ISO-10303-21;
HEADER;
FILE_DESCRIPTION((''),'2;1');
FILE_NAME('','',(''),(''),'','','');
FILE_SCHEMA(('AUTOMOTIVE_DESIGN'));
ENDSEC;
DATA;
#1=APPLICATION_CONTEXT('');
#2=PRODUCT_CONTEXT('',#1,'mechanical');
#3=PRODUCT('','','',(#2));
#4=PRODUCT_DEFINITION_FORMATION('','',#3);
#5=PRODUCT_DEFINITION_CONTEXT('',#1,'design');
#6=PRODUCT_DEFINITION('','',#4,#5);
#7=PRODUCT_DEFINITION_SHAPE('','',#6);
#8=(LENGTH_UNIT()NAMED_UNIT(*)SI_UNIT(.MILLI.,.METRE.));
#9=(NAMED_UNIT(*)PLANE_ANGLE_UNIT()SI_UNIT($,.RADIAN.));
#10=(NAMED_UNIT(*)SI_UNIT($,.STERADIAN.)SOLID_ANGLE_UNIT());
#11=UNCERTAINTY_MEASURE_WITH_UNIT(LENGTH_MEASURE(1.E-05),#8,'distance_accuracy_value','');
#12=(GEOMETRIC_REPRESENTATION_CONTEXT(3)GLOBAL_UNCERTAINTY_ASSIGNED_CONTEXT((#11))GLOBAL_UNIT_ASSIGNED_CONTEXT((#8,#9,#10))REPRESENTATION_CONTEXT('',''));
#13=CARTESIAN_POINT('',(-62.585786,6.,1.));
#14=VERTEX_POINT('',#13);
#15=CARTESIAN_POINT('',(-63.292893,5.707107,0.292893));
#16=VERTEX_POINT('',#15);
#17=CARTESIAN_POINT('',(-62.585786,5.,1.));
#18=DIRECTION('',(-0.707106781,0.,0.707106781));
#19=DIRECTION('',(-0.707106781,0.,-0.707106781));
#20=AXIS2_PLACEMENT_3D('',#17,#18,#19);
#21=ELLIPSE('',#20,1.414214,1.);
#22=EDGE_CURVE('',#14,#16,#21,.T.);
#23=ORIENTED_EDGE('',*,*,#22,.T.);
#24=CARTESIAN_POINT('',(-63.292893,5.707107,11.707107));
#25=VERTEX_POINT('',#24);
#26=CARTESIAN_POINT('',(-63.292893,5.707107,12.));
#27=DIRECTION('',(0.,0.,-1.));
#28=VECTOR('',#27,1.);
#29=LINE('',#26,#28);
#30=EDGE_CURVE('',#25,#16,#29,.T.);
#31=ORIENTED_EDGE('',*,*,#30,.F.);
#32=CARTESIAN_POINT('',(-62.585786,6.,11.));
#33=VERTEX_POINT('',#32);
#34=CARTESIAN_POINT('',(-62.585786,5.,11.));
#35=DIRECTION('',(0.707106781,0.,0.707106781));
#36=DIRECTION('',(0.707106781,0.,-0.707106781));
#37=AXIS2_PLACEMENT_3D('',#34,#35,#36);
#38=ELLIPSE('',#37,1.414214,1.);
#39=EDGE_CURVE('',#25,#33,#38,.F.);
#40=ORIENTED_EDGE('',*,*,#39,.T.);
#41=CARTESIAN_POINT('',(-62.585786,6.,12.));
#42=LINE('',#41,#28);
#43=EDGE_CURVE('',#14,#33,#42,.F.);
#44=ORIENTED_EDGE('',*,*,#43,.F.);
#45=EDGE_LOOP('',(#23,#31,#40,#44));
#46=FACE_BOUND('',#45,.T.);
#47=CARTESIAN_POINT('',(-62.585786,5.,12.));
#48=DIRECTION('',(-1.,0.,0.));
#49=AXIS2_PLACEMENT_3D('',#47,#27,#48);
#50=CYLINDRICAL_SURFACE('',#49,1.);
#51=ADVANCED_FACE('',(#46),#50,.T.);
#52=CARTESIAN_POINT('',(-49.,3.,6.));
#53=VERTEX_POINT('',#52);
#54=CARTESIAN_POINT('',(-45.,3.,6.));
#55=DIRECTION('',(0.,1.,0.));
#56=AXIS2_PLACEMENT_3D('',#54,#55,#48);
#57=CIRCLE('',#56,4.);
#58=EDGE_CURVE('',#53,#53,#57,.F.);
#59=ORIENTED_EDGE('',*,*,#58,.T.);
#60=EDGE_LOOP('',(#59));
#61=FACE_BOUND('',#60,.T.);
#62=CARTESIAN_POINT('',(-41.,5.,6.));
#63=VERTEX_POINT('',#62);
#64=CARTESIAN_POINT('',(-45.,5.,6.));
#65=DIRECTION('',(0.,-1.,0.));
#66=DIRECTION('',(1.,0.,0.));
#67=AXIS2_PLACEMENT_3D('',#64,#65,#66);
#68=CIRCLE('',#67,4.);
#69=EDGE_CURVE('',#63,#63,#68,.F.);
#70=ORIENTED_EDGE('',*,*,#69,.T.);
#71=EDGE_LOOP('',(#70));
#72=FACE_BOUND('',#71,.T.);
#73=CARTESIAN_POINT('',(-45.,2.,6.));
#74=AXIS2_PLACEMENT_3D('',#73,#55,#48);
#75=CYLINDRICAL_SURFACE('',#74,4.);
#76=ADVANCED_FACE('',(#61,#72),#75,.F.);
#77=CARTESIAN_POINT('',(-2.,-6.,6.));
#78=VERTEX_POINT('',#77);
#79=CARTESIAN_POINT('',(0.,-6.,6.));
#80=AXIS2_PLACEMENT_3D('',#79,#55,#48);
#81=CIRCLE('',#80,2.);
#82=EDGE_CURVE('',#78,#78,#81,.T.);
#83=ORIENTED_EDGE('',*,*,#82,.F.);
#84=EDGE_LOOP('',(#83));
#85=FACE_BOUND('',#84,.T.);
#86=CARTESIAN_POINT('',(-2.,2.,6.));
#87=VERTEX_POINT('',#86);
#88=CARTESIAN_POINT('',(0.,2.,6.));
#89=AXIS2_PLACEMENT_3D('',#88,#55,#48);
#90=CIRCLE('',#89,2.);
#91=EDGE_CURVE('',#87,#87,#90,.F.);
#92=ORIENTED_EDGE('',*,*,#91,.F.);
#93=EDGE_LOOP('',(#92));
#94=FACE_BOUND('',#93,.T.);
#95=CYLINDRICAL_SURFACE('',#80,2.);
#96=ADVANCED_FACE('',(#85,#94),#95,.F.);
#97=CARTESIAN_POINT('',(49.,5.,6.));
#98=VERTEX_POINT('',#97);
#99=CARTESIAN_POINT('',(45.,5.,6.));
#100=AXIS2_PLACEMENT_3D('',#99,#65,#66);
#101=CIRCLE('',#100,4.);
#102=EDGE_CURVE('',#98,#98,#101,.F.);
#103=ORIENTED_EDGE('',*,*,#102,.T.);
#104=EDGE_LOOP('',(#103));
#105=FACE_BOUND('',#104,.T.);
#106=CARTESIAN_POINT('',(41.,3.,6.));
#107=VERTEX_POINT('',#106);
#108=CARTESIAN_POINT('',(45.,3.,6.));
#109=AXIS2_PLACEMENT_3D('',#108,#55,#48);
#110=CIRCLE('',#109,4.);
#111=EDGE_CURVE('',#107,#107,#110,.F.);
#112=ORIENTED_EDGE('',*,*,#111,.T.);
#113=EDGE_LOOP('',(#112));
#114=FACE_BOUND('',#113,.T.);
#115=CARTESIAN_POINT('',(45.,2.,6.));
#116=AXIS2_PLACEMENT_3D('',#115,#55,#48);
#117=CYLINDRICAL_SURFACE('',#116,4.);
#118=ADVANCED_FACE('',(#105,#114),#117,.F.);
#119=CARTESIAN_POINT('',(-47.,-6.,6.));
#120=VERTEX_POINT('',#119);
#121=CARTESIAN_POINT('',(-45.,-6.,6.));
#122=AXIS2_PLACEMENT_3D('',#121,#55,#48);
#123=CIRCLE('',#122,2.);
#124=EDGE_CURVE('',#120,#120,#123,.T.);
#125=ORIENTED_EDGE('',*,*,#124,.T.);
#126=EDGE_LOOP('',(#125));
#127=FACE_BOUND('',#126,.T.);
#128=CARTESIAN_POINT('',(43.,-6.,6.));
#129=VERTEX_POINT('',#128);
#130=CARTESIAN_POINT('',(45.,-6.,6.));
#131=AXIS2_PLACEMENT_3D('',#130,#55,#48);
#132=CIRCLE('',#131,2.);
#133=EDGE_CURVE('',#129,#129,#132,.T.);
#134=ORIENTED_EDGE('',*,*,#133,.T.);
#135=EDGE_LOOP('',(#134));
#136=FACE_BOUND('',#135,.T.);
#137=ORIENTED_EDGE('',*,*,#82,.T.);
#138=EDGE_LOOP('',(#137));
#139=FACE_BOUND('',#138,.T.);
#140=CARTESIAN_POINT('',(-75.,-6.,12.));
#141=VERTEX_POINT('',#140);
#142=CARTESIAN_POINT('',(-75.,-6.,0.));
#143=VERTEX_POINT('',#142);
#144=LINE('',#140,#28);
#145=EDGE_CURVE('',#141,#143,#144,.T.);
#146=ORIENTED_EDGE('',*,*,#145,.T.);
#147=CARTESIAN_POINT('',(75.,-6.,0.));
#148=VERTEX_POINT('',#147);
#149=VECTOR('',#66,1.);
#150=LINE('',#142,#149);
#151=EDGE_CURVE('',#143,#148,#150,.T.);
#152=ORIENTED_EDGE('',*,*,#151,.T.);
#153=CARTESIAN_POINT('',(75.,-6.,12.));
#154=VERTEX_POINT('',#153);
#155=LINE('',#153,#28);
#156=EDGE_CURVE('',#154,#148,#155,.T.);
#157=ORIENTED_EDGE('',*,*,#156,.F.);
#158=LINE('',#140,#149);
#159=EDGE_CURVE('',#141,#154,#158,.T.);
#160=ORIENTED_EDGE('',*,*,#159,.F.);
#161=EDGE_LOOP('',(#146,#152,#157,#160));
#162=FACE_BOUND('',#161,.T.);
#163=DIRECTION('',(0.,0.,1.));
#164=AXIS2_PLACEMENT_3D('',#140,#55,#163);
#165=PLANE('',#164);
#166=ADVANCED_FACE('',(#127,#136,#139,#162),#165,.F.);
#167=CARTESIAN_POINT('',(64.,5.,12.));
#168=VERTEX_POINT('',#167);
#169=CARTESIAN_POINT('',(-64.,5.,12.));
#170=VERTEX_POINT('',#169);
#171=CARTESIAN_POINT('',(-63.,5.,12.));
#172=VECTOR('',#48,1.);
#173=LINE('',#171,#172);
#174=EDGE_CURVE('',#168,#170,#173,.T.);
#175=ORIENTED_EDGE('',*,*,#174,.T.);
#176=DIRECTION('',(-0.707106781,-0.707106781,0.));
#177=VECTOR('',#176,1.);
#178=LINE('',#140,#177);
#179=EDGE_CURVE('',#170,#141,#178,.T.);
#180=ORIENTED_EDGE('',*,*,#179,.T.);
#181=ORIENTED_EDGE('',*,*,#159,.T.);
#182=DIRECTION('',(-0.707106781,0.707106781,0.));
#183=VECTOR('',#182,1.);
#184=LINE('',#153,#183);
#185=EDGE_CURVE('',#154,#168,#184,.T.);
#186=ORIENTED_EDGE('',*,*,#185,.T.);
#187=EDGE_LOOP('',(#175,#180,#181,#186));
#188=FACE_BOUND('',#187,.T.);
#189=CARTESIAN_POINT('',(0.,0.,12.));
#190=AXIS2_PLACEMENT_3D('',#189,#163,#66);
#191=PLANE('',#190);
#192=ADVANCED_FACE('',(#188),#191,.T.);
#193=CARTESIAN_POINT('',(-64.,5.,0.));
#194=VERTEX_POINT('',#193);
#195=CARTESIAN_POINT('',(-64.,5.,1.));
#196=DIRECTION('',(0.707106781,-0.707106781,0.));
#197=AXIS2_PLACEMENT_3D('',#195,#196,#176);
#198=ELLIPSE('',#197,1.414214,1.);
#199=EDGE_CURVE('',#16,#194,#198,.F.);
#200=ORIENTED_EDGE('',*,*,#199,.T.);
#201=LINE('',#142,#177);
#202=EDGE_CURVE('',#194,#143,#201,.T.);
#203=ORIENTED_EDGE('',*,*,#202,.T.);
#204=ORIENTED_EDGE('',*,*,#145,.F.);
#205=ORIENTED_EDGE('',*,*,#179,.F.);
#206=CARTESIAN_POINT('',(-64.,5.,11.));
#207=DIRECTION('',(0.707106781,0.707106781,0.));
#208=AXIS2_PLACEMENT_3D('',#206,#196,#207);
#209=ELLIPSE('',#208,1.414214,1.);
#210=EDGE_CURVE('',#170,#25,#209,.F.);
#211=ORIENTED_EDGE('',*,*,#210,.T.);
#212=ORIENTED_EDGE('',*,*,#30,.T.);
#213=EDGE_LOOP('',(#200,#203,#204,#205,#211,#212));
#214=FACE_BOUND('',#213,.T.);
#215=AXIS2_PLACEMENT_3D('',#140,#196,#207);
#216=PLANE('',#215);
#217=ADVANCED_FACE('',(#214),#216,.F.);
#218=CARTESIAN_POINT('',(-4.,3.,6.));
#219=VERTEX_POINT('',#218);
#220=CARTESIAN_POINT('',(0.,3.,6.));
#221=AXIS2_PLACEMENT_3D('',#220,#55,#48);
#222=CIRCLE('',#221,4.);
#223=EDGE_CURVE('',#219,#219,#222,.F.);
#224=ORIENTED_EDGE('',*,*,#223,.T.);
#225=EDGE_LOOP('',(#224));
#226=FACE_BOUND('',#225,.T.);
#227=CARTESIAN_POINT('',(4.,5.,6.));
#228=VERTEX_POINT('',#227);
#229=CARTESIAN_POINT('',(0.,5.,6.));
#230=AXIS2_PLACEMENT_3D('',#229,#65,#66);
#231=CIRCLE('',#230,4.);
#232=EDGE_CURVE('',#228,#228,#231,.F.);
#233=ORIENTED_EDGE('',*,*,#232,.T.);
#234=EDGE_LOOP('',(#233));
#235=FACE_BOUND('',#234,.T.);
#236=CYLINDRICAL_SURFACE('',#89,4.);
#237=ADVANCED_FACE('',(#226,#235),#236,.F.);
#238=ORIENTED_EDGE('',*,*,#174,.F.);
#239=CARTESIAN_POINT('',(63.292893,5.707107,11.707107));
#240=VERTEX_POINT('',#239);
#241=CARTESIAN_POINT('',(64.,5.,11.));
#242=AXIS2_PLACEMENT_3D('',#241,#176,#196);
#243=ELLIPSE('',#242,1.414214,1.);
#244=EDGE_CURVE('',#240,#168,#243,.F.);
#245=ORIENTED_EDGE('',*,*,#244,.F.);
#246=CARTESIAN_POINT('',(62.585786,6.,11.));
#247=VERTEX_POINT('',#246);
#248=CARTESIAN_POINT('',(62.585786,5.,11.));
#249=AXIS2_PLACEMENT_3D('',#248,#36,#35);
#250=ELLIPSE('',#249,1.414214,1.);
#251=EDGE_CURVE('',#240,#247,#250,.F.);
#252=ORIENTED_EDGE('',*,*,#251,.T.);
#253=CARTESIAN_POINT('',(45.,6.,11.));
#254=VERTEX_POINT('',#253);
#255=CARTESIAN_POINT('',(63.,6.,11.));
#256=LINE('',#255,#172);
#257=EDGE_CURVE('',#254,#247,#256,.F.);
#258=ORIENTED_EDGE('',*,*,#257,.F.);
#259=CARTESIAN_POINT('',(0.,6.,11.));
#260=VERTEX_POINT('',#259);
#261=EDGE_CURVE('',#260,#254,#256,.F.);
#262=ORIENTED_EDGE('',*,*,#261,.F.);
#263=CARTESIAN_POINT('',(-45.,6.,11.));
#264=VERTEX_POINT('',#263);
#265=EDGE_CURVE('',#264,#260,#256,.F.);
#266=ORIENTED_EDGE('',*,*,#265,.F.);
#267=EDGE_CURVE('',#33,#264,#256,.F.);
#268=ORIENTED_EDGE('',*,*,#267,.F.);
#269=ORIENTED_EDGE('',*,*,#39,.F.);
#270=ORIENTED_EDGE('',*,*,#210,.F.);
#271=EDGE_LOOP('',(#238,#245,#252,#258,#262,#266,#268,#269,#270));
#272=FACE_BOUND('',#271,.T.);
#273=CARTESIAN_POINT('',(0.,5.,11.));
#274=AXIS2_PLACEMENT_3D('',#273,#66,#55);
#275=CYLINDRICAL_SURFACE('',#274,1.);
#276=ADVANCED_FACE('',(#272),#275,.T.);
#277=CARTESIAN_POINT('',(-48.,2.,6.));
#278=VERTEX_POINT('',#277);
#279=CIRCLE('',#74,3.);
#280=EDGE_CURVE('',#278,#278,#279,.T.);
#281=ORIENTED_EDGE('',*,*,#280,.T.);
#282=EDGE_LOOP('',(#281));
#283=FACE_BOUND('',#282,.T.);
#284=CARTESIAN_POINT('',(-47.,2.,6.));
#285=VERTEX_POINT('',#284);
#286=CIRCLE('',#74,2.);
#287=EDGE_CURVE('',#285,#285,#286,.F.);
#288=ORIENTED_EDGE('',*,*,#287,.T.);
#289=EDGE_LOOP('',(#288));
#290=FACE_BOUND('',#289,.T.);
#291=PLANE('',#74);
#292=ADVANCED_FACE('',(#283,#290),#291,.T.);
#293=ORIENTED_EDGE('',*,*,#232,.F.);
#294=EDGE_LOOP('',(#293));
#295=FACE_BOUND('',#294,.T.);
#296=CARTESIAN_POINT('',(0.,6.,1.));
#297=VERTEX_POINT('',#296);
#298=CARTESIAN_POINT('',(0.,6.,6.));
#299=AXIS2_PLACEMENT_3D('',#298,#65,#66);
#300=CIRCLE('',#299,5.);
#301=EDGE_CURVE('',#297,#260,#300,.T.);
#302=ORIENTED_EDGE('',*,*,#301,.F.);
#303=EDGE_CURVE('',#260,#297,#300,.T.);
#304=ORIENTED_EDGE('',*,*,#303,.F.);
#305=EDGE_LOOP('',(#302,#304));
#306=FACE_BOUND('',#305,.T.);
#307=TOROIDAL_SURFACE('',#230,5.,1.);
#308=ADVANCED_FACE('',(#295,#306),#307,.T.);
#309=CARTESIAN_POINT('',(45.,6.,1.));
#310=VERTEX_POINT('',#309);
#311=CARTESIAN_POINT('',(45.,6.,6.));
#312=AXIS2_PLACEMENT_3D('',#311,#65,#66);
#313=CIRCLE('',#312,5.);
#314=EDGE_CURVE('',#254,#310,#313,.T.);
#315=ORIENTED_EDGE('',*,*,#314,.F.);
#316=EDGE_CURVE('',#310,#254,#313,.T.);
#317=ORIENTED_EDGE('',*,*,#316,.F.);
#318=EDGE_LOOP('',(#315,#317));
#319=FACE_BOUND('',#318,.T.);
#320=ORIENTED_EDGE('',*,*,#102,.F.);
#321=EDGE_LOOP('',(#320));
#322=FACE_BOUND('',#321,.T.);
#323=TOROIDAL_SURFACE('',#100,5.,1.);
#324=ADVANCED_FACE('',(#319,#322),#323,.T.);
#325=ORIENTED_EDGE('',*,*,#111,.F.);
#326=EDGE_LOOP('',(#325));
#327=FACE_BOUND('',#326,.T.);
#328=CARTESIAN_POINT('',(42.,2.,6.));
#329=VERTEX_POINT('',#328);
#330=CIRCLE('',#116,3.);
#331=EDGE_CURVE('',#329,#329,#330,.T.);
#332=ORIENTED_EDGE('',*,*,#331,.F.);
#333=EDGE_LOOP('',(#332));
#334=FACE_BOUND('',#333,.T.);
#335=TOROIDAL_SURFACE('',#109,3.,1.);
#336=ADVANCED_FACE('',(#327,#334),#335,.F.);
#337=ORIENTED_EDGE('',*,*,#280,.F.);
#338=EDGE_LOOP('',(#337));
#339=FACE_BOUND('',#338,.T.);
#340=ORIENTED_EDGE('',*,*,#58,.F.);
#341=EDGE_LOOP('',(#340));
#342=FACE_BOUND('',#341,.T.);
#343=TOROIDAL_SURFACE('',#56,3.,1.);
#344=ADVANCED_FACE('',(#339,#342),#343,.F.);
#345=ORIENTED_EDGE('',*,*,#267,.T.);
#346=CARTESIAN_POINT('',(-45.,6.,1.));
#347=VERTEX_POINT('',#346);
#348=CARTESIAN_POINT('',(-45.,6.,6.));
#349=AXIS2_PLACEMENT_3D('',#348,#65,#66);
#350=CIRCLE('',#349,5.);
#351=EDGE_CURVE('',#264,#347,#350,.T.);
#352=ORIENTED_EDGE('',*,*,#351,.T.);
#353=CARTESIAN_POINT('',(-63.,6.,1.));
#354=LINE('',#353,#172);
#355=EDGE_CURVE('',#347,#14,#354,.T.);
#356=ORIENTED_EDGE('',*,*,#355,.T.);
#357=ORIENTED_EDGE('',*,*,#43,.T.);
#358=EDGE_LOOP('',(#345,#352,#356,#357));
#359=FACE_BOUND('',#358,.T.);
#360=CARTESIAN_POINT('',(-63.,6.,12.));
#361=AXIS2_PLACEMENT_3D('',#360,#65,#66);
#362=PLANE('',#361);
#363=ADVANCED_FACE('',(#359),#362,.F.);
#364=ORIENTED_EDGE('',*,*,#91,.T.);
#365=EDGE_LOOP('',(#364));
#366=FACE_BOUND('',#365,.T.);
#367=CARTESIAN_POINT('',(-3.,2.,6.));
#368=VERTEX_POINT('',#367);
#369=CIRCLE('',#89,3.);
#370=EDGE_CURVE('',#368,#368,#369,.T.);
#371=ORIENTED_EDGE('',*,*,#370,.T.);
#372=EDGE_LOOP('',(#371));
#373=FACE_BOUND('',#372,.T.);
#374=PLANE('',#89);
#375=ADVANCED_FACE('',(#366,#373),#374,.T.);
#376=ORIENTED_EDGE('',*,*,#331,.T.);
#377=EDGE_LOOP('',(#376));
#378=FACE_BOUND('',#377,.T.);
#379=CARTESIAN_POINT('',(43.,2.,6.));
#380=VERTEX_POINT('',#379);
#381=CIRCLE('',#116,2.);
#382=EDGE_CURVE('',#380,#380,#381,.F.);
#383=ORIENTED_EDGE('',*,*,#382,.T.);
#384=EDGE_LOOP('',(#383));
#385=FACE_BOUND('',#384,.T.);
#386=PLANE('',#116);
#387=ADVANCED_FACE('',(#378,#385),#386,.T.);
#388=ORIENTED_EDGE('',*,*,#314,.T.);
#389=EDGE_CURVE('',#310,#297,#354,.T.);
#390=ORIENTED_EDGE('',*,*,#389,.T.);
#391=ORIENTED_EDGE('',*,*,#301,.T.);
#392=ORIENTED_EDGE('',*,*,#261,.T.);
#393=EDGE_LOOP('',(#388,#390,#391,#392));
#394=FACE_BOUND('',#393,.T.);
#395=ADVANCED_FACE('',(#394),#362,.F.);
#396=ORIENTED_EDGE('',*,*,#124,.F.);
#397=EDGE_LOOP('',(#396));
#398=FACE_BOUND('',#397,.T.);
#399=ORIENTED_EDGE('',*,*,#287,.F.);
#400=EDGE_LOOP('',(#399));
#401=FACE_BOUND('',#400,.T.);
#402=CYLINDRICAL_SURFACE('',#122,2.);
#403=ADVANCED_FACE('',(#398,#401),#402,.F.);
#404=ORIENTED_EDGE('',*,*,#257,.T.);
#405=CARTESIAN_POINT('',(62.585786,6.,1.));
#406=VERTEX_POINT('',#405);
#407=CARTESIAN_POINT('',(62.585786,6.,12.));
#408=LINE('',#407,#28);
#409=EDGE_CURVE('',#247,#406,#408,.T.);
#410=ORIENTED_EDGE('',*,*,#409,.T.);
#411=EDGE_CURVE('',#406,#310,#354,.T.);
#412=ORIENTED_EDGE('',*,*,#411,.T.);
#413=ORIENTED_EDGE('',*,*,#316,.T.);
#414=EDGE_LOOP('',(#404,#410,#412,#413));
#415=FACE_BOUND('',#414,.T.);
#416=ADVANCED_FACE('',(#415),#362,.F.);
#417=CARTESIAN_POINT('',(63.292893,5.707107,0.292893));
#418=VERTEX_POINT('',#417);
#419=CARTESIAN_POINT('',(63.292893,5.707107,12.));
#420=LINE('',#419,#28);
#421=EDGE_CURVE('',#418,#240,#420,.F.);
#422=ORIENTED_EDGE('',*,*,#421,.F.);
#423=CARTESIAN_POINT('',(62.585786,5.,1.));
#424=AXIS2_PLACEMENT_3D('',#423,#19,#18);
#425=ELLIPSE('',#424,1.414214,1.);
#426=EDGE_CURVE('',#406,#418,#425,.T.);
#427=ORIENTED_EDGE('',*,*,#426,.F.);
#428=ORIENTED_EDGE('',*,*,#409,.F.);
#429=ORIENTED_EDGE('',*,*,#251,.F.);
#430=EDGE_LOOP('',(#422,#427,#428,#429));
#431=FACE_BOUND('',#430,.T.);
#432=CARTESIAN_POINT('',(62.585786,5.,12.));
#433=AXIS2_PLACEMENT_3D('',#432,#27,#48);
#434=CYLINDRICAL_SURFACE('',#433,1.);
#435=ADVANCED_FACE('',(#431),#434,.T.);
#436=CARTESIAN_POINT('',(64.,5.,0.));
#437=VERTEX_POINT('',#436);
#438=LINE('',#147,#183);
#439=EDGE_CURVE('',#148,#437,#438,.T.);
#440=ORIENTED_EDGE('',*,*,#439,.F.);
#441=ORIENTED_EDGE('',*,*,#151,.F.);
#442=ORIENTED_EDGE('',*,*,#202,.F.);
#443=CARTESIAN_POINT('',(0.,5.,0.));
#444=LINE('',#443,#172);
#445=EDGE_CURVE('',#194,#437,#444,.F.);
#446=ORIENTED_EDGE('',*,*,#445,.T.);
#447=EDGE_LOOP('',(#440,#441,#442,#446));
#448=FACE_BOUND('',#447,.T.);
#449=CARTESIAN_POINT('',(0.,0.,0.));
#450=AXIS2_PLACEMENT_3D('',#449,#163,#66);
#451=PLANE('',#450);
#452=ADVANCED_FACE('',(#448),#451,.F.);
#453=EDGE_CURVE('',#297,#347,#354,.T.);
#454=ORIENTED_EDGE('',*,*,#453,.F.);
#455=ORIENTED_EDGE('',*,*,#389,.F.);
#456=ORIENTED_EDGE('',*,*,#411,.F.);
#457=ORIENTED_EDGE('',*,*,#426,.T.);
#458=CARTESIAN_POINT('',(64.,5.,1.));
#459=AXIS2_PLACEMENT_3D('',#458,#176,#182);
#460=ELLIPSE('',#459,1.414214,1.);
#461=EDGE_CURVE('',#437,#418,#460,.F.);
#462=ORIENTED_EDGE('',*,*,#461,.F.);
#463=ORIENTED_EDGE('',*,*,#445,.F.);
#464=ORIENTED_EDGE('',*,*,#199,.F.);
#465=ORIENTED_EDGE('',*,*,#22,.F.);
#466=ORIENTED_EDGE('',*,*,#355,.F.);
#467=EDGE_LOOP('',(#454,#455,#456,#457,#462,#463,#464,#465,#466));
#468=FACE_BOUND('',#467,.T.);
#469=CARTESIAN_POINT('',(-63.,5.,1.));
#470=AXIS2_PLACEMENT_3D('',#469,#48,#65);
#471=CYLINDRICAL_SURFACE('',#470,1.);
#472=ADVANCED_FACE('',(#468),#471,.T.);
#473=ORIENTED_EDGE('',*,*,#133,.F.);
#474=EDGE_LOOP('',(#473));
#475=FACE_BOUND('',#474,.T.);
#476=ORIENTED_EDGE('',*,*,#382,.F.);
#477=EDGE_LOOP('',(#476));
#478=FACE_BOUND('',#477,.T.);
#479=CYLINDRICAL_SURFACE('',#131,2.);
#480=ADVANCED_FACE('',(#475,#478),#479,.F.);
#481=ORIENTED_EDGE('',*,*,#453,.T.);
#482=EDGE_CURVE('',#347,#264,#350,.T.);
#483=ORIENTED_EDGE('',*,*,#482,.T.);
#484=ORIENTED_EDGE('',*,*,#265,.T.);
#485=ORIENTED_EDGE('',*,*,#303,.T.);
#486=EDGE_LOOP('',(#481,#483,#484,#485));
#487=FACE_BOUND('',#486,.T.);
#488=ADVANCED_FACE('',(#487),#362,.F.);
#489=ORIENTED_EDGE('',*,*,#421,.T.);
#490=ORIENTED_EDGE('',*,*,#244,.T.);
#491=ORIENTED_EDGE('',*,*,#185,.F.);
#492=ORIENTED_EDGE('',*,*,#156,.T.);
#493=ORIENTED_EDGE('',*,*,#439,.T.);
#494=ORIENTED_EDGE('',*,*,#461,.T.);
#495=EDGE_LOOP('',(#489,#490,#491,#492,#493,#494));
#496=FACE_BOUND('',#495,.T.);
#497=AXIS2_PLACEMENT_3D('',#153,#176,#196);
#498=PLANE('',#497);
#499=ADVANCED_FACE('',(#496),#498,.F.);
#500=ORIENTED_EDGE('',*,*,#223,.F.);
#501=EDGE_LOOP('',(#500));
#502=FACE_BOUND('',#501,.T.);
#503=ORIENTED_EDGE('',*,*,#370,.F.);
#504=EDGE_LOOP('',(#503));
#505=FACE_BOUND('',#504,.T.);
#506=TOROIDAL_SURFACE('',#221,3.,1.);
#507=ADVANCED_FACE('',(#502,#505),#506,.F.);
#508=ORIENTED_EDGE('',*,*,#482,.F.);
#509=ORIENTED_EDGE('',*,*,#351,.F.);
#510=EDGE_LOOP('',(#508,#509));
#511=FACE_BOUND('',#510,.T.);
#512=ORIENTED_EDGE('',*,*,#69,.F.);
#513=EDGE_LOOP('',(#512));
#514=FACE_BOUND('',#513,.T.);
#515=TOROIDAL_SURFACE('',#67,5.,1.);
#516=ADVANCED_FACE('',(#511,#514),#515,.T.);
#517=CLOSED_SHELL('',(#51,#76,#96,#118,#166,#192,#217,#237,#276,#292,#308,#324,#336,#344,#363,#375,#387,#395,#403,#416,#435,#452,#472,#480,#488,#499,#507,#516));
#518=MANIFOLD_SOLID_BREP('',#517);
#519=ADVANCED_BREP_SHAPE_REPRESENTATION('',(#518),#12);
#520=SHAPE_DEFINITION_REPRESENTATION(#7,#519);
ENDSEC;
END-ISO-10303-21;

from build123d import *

# Parameters (mm, degrees)
BOSS_EXTRUDE1_DEPTH = 12
SKETCH3_R           = 2
CUT_EXTRUDE1_DEPTH  = 12
SKETCH4_R           = 4
CUT_EXTRUDE2_DEPTH  = 4
FILLET1_R           = 1
FILLET2_R           = 1
FILLET3_R           = 1


with BuildPart() as part:
    # Sketch2 → Boss-Extrude1 (new body)
    with BuildSketch(Plane.XY):
        Polygon((-75, -6), (-63, 6), (63, 6), (75, -6), align=None)
    extrude(amount=BOSS_EXTRUDE1_DEPTH)

    # Sketch3 → Cut-Extrude1 (cut)
    with BuildSketch(Plane(origin=(0, 6, 0), x_dir=(1, 0, 0), z_dir=(0, 1, 0))):
        with Locations(Location((0, -6, 0), (0, 0, 180))):
            Circle(SKETCH3_R)
        with Locations(Location((45, -6, 0), (0, 0, 180))):
            Circle(SKETCH3_R)
        with Locations(Location((-45, -6, 0), (0, 0, 180))):
            Circle(SKETCH3_R)
    extrude(amount=-CUT_EXTRUDE1_DEPTH, mode=Mode.SUBTRACT)

    # Sketch4 → Cut-Extrude2 (cut)
    with BuildSketch(Plane(origin=(0, 6, 0), x_dir=(1, 0, 0), z_dir=(0, 1, 0))):
        with Locations(Location((-45, -6, 0), (0, 0, 180))):
            Circle(SKETCH4_R)
        with Locations(Location((0, -6, 0), (0, 0, 180))):
            Circle(SKETCH4_R)
        with Locations(Location((45, -6, 0), (0, 0, 180))):
            Circle(SKETCH4_R)
    extrude(amount=-CUT_EXTRUDE2_DEPTH, mode=Mode.SUBTRACT)

    # Fillet1
    fillet1_edges = [part.edges().sort_by_distance(p)[0] for p in [
        (-41, 6, 6),
        (4, 6, 6),
        (49, 6, 6),
    ]]
    fillet(fillet1_edges, radius=FILLET1_R)

    # Fillet2
    fillet2_edges = [part.edges().sort_by_distance(p)[0] for p in [
        (-41, 2, 6),
        (4, 2, 6),
        (49, 2, 6),
    ]]
    fillet(fillet2_edges, radius=FILLET2_R)

    # Fillet3
    fillet3_edges = [part.edges().sort_by_distance(p)[0] for p in [
        (0, 6, 12),
        (0, 6, 0),
        (-63, 6, 6),
        (63, 6, 6),
    ]]
    fillet(fillet3_edges, radius=FILLET3_R - 0.0001)  # a hair under: the kernel refuses the full size


solid = part.part
